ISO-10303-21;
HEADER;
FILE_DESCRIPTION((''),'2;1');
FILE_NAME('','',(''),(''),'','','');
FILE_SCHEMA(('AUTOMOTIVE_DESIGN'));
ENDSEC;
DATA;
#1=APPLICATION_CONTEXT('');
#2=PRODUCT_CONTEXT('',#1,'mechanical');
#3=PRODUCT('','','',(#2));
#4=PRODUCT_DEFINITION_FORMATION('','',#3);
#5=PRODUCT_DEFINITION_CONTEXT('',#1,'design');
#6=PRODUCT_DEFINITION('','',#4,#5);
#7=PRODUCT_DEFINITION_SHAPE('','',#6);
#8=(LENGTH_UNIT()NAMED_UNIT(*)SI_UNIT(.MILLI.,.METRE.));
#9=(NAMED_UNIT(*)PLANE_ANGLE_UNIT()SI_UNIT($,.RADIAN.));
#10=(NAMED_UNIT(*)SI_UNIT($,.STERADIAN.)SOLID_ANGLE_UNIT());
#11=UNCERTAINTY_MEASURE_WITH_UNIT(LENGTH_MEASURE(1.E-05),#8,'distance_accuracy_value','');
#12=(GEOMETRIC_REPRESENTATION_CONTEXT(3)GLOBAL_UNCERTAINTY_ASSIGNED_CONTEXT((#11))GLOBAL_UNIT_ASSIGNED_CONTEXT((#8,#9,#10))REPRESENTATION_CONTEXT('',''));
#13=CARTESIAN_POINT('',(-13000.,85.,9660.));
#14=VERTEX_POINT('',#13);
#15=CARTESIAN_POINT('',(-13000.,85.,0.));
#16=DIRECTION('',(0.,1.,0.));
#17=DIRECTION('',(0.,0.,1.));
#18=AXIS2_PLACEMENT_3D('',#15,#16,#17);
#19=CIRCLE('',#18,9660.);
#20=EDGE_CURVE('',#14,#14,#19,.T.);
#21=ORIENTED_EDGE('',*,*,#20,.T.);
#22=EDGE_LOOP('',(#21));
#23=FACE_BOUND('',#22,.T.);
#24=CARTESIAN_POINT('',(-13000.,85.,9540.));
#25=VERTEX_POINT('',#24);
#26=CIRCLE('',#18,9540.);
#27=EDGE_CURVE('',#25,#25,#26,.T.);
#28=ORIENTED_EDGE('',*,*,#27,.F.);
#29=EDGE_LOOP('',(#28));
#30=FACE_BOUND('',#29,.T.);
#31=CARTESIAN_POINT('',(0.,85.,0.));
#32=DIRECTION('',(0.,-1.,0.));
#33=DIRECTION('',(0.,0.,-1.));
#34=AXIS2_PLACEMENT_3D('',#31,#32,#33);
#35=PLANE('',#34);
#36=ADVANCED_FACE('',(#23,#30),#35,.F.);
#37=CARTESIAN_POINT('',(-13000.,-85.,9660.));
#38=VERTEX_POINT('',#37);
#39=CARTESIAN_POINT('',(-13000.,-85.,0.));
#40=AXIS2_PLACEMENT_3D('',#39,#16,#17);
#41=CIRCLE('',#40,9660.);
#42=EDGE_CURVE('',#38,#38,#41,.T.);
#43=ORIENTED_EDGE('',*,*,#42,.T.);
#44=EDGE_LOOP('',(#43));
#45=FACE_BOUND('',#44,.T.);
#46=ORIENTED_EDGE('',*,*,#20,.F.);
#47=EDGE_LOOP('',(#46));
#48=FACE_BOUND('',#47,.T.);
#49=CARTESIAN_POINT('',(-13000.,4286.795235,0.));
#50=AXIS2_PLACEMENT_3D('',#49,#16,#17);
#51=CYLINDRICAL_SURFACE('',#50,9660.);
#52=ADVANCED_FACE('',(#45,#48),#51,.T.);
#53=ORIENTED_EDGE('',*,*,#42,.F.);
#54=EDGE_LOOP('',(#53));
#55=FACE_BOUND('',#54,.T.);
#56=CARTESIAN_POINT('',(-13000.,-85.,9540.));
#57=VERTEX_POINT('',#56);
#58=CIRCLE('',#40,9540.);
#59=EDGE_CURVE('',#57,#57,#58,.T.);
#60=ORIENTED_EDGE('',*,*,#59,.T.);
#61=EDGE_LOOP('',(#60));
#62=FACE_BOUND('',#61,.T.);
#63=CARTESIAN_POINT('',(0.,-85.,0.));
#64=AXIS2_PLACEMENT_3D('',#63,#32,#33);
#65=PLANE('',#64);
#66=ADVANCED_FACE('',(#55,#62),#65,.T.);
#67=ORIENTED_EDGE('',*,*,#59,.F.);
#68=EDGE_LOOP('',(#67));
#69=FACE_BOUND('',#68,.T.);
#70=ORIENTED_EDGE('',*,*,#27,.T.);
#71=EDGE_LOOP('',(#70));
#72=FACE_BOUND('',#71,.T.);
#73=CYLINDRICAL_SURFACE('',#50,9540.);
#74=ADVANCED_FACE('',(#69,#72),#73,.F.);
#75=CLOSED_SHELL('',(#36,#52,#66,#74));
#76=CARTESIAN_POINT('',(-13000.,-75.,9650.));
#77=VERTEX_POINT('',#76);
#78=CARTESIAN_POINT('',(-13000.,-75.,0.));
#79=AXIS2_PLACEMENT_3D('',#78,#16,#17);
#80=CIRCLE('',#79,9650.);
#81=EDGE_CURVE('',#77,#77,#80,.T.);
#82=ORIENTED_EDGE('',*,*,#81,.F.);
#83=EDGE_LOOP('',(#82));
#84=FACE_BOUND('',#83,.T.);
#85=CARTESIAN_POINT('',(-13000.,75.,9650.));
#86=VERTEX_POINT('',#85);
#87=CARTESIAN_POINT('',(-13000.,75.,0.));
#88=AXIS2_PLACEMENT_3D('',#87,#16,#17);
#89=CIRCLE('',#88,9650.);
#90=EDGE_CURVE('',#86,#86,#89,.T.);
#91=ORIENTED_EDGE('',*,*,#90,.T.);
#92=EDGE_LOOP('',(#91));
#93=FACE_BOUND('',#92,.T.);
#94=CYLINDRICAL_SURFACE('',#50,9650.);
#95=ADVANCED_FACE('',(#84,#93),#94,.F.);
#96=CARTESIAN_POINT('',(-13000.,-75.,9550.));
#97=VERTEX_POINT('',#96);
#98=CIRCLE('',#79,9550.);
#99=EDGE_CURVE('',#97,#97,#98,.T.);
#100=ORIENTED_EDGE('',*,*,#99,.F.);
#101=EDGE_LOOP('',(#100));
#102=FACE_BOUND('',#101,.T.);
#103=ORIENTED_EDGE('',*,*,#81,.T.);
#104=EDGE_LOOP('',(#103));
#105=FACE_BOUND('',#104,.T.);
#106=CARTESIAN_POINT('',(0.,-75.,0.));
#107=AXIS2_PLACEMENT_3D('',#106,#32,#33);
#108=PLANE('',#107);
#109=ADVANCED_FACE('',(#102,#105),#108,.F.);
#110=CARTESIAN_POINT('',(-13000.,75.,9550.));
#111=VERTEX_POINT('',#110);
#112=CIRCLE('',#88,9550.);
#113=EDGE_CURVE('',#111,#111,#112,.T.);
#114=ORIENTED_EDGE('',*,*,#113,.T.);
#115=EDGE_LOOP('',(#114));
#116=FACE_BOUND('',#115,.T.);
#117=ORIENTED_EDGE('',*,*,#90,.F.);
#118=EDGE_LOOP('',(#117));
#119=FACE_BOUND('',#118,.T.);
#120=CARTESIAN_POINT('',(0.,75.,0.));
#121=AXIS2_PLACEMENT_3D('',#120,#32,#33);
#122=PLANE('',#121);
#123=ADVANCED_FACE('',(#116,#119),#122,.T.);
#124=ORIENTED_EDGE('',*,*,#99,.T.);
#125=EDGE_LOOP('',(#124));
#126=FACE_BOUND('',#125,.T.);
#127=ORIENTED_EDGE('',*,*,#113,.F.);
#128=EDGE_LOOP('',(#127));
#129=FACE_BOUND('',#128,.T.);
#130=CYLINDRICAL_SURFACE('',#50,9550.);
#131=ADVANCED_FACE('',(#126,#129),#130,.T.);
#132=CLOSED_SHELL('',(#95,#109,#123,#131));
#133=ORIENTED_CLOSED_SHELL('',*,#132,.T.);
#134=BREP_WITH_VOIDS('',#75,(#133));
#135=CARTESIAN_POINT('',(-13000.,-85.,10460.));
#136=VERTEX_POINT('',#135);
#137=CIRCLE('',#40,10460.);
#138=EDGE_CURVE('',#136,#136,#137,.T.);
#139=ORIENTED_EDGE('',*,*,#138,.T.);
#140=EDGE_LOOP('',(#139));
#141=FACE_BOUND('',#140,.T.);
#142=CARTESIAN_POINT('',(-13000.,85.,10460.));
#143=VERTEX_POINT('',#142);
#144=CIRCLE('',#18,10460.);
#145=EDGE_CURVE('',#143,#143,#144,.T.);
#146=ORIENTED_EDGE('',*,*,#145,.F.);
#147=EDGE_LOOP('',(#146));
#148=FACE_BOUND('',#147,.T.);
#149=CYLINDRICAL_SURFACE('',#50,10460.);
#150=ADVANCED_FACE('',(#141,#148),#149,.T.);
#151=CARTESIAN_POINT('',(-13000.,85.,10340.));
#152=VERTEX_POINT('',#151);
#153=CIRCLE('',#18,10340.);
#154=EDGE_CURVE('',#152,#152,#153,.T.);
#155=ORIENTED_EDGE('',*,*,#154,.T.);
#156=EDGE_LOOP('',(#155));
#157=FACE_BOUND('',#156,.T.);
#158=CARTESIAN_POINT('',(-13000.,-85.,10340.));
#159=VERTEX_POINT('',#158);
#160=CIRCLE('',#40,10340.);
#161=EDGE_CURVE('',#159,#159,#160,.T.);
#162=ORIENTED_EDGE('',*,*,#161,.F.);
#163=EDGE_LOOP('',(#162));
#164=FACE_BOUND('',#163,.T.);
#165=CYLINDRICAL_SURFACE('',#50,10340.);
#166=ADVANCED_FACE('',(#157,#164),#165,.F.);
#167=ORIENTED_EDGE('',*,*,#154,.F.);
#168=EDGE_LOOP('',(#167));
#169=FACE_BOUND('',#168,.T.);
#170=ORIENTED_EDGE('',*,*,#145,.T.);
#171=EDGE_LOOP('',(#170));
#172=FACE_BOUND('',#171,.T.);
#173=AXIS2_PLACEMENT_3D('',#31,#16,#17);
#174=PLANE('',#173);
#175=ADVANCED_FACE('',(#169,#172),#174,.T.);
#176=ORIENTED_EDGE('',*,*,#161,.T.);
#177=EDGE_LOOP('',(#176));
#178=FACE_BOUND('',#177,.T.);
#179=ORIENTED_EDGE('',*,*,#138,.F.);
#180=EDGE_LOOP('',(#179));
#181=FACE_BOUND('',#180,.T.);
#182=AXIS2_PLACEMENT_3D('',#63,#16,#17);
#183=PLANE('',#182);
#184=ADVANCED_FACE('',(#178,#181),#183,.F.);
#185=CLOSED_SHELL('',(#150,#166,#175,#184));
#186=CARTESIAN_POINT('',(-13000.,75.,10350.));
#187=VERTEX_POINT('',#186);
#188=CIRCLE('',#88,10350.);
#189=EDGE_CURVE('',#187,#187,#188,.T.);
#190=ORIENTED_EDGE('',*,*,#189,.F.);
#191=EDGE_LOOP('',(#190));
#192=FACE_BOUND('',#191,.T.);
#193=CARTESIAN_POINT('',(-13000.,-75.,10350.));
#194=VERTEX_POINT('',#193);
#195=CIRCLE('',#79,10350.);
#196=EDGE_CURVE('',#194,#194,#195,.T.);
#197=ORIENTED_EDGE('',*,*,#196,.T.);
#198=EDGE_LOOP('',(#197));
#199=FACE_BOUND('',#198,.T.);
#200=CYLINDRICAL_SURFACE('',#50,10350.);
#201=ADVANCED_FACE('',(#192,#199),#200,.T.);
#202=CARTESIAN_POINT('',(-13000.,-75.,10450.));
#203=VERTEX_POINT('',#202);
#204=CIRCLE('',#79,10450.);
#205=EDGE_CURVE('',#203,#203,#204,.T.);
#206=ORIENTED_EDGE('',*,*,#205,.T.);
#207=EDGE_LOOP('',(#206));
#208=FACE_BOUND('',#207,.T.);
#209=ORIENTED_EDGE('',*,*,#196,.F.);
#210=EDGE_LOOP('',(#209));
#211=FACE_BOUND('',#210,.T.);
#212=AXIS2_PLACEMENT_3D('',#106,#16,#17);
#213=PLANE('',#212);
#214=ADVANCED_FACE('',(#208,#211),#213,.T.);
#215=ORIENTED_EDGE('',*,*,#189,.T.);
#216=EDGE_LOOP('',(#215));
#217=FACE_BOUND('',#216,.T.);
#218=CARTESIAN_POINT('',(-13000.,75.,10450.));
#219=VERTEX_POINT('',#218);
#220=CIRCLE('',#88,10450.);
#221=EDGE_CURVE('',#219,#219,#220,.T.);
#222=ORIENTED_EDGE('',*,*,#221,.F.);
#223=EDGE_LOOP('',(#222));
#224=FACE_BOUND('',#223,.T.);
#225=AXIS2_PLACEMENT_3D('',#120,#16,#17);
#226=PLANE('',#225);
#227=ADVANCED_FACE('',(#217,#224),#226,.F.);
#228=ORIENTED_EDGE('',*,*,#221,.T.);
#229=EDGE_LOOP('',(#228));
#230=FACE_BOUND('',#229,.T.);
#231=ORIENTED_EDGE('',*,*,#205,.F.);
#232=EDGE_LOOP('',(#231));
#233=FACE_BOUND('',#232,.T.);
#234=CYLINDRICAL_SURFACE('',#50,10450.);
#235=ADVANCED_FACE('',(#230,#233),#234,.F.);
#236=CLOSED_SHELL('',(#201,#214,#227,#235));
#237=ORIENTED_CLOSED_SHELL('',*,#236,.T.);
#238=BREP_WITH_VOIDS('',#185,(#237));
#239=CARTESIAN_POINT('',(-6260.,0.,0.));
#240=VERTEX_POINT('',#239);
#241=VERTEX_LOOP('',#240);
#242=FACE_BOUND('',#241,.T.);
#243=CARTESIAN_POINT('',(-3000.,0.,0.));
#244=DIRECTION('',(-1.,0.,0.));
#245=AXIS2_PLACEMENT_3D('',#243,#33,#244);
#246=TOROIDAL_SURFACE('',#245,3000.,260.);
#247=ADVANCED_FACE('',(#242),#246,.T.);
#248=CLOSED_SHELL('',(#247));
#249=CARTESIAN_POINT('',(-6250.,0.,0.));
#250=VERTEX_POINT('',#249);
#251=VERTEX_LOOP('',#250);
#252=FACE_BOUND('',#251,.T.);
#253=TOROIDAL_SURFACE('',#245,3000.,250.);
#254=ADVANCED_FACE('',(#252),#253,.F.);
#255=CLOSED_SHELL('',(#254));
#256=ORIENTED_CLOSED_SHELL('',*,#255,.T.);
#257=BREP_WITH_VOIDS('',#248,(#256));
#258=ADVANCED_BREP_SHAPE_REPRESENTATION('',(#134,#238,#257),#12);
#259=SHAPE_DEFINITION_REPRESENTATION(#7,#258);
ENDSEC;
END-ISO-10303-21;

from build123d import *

# Parameters (mm, degrees)
SKETCH_1_R            = 260
SKETCH_1_R_2          = 250
REVOLVE_2_OUTLINE_W   = 120
REVOLVE_2_OUTLINE_H   = 170
REVOLVE_2_OUTLINE_W_2 = 100
REVOLVE_2_OUTLINE_H_2 = 150


# Read off the part's stored shape, not the designer's step: 旋转-薄壁2
with BuildPart() as part:
    # 草图1 → 旋转-薄壁1 (revolve)
    with BuildSketch(Plane(origin=(0, 0, 0), x_dir=(1, 0, 0), z_dir=(0, 1, 0)), mode=Mode.PRIVATE) as revolve_1_sk:
        Circle(SKETCH_1_R)
        Circle(SKETCH_1_R_2, mode=Mode.SUBTRACT)
    revolve(revolve_1_sk.sketch.rotate(Axis((-3000, 0, -270.869049162), (0, 0, 1)), 180), axis=Axis((-3000, 0, -270.869049162), (0, 0, 1)))


with BuildPart() as body_2:
    # 旋转-薄壁2 outline → 旋转-薄壁2 (revolve)
    # profile 1 of 2: a face of its own
    with BuildSketch(Plane(origin=(-13000, 0, 0), x_dir=(1, 0, 0), z_dir=(0, 0, 1))):
        with Locations((10400, 0)):
            Rectangle(REVOLVE_2_OUTLINE_W, REVOLVE_2_OUTLINE_H)
        with Locations((10400, 0)):
            Rectangle(REVOLVE_2_OUTLINE_W_2, REVOLVE_2_OUTLINE_H_2, mode=Mode.SUBTRACT)
    # profile 2 of 2: a face of its own
    with BuildSketch(Plane(origin=(-13000, 0, 0), x_dir=(1, 0, 0), z_dir=(0, 0, 1))):
        with Locations((9600, 0)):
            Rectangle(REVOLVE_2_OUTLINE_W, REVOLVE_2_OUTLINE_H)
        with Locations((9600, 0)):
            Rectangle(REVOLVE_2_OUTLINE_W_2, REVOLVE_2_OUTLINE_H_2, mode=Mode.SUBTRACT)
    revolve(axis=Axis((-13000, 0, 0), (0, 1, 0)))


solid = Compound([part.part, body_2.part])
